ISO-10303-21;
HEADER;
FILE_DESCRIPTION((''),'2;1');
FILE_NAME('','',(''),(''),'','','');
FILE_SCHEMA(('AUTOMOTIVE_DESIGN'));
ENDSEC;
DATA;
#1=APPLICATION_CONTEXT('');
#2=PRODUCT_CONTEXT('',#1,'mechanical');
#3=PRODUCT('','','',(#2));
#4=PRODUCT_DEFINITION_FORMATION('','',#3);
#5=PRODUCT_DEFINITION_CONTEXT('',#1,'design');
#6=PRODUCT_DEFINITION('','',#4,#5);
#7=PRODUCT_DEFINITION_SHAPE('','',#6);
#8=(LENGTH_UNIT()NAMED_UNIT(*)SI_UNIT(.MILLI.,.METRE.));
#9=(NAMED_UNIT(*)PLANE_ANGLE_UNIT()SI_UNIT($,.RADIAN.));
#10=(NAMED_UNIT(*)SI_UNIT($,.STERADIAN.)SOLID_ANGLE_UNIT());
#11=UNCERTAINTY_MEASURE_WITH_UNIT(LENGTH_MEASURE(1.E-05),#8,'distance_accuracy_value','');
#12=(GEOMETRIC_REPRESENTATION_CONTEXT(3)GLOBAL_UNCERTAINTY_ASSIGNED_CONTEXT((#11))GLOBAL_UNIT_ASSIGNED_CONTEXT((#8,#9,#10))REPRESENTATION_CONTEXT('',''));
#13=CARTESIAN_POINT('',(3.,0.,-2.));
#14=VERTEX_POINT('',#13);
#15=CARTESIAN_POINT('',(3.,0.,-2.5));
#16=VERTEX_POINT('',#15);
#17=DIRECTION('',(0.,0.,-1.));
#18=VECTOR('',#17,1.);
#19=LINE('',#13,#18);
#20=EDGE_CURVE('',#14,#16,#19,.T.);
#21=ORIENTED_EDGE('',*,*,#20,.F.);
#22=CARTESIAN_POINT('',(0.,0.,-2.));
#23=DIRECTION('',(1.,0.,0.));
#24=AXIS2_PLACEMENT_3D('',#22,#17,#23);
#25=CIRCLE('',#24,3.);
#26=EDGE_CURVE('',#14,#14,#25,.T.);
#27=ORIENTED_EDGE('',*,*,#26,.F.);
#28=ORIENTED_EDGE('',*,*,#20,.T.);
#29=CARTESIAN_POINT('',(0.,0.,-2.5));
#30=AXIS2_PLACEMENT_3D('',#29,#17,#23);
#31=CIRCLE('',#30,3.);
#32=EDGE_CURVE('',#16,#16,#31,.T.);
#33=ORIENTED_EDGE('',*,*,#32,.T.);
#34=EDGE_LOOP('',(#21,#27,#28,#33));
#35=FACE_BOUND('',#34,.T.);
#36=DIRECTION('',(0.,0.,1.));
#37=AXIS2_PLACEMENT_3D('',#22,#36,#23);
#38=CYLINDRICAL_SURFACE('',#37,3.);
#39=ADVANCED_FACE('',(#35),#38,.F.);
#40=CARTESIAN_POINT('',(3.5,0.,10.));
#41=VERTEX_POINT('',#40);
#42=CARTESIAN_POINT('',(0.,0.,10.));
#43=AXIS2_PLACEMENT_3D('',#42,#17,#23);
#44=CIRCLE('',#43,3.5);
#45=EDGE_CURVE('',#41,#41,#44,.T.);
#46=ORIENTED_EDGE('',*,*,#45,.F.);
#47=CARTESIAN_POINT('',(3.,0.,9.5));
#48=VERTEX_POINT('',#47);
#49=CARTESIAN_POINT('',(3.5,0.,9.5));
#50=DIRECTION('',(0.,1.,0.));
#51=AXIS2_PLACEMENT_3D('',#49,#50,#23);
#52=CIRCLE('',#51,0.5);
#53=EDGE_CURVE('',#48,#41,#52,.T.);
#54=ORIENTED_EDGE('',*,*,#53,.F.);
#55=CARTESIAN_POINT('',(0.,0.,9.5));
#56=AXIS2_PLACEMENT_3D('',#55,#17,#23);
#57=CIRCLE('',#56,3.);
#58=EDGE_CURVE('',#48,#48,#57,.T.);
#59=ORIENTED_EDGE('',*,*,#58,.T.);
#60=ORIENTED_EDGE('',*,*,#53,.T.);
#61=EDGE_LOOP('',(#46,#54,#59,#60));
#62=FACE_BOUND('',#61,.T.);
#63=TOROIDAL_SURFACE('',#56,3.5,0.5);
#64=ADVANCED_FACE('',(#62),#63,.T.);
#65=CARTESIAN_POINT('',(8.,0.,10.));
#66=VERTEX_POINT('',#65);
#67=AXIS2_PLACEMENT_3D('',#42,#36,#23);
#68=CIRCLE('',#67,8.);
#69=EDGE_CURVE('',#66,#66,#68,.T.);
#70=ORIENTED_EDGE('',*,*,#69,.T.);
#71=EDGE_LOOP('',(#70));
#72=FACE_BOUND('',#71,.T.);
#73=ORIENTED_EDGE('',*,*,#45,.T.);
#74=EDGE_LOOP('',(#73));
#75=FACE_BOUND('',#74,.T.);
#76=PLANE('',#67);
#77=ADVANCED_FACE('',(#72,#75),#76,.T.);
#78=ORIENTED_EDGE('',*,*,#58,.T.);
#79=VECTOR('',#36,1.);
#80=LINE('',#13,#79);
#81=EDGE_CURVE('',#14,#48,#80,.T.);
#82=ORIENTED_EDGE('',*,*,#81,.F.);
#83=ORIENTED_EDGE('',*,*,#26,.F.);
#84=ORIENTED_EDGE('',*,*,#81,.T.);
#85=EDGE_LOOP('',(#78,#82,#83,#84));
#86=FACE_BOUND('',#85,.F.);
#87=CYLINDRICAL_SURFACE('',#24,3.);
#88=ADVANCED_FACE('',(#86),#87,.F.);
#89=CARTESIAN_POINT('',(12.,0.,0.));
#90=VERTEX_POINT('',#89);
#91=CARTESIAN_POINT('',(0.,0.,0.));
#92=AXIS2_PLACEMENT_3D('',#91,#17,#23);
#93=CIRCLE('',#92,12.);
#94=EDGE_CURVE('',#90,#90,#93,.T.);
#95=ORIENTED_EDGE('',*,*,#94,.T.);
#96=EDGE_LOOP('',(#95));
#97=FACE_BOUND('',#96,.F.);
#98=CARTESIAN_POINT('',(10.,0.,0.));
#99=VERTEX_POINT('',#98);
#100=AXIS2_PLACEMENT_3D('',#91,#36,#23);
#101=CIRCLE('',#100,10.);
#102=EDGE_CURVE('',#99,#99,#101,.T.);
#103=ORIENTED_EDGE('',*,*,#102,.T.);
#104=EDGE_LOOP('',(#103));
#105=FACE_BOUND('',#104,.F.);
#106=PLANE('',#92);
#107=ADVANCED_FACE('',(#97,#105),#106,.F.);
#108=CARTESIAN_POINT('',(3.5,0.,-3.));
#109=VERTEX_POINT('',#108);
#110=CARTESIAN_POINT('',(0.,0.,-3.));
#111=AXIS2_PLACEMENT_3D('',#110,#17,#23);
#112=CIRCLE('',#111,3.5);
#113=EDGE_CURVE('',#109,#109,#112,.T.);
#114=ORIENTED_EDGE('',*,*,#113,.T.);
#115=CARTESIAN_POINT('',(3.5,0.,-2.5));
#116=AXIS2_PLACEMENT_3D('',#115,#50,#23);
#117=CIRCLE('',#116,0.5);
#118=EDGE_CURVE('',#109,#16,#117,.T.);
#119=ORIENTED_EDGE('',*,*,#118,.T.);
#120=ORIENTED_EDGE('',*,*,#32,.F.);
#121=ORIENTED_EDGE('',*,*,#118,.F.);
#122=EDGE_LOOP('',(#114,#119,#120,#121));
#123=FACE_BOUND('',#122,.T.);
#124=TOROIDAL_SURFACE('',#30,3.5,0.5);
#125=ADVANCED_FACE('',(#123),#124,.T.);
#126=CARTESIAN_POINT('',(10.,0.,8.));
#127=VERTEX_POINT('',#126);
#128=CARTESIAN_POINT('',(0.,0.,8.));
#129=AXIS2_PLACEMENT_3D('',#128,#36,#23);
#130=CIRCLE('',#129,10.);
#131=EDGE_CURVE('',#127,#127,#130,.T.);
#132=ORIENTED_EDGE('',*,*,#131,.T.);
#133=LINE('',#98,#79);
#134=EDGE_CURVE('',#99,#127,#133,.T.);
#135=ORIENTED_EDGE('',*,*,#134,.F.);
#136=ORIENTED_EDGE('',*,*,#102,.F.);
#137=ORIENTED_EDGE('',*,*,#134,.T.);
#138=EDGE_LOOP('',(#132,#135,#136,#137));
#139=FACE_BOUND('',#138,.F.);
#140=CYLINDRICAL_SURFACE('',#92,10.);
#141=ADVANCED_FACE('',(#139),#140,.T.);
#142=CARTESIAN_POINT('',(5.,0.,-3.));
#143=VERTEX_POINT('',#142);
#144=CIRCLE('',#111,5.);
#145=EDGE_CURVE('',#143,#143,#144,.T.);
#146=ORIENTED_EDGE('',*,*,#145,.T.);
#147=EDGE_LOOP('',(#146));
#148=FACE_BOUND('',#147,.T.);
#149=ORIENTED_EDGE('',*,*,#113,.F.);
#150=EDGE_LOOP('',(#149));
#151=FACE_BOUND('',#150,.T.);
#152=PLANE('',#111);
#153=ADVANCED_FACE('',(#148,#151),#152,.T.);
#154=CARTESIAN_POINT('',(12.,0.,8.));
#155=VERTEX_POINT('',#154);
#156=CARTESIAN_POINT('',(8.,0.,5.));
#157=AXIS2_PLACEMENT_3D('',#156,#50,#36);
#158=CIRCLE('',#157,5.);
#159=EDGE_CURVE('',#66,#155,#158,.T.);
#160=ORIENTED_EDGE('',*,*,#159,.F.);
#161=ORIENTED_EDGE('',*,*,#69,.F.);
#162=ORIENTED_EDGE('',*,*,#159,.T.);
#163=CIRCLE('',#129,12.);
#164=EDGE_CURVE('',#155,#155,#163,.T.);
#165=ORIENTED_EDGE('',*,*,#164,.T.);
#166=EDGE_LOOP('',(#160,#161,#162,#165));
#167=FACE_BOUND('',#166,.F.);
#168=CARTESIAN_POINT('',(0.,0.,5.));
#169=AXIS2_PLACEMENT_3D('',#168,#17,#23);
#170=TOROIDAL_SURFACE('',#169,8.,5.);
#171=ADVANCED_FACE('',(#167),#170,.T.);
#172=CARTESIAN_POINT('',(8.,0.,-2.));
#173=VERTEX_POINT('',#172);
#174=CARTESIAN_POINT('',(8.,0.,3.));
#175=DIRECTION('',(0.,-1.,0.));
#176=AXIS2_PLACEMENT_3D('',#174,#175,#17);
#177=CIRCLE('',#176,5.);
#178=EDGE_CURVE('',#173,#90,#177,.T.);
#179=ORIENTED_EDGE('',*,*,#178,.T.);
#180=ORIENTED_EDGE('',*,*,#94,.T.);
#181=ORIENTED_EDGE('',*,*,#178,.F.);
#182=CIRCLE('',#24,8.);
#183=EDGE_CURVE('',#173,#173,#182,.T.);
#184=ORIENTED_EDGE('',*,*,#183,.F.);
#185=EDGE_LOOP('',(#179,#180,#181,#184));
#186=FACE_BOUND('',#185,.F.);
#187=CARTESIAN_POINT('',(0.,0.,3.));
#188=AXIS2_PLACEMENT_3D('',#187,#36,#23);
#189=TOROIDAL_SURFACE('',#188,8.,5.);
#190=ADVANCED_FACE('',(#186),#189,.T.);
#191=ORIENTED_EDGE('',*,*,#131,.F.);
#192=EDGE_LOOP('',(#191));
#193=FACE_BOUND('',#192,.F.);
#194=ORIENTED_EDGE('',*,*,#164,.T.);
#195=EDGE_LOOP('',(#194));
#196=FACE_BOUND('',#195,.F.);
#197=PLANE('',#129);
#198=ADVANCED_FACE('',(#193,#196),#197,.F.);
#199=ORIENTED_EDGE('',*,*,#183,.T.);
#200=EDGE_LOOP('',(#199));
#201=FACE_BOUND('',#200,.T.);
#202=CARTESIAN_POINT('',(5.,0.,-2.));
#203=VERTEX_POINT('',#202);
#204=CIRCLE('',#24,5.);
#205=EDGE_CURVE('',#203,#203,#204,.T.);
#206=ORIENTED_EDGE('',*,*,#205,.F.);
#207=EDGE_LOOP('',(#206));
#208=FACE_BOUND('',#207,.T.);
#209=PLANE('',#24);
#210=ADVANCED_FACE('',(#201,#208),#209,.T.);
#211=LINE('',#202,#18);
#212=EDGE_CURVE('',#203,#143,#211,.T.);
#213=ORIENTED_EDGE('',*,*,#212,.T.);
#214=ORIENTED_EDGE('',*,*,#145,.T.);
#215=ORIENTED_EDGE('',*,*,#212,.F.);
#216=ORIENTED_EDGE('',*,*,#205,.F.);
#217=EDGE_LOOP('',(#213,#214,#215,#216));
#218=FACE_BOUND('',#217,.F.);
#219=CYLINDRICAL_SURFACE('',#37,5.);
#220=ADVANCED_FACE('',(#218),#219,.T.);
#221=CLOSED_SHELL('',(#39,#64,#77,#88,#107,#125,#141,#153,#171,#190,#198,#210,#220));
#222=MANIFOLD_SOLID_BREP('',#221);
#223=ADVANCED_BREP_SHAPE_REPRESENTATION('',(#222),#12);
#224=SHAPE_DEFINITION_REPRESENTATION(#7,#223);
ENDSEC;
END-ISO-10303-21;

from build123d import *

# Parameters (mm, degrees)
F0_R      = 10
F1_DEPTH  = 8
F2_R      = 12
F2_R_2    = 10
F3_DEPTH  = 2
F4_R      = 12
F4_R_2    = 10
F5_DEPTH  = 2
F6_R      = 3
F7_DEPTH  = 25
F9_R      = 5
F9_R_2    = 3
F10_DEPTH = 1
F11_R     = 0.5
F13_R     = 0.5


# Not quite as in the source:
# - a fillet or chamfer that OpenCascade refuses, or shapes differently, is made with other operations: its cross-section is extruded or revolved along the edge and cut away or added


with BuildPart() as f1:
    # F0 (on Top) → F1 (new body)
    with BuildSketch(Plane.XY):
        Circle(F0_R)
    extrude(amount=F1_DEPTH)

    # F2 (on face) → F3 (join)
    with BuildSketch(Plane.XY.offset(8)):
        Circle(F2_R)
        Circle(F2_R_2, mode=Mode.SUBTRACT)
        Circle(F2_R_2)
    extrude(amount=F3_DEPTH)

    # F4 (on face) → F5 (join)
    with BuildSketch(Plane(origin=(0, 0, 0), x_dir=(1, 0, 0), z_dir=(0, 0, -1))):
        Circle(F4_R)
        Circle(F4_R_2, mode=Mode.SUBTRACT)
        Circle(F4_R_2)
    extrude(amount=F5_DEPTH)

    # F6 (on face) → F7 (cut)
    with BuildSketch(Plane(origin=(0, 0, -2), x_dir=(1, 0, 0), z_dir=(0, 0, -1))):
        Circle(F6_R)
    extrude(amount=-F7_DEPTH, mode=Mode.SUBTRACT)

    # F8: union 

    # F9 (on face) → F10 (join)
    with BuildSketch(Plane(origin=(0, 0, -2), x_dir=(1, 0, 0), z_dir=(0, 0, -1))):
        Circle(F9_R)
        Circle(F9_R_2, mode=Mode.SUBTRACT)
    extrude(amount=F10_DEPTH)

    # F11
    f11_edges = [f1.edges().sort_by_distance(p)[0] for p in [
        (-3, 0, -3),
    ]]
    fillet(f11_edges, radius=F11_R)

    # F12: fillet of radius 5 on 2 edges, made by hand

    # F12_s1 → F12_t2 (revolve, cut)
    with BuildSketch(Plane.XZ):
        with BuildLine():
            ThreePointArc((8, -2), (10.2360679775, -1.472135955), (12, 0))
            Line((12, 0), (12, -2))
            Line((12, -2), (8, -2))
        make_face()
    revolve(axis=Axis((0, 0, -2), (0, 0, -1)), mode=Mode.SUBTRACT)

    # F12_s3 → F12_t4 (revolve, cut)
    with BuildSketch(Plane.XZ):
        with BuildLine():
            ThreePointArc((8, 10), (10.2360679775, 9.472135955), (12, 8))
            Line((12, 8), (12, 10))
            Line((12, 10), (8, 10))
        make_face()
    revolve(axis=Axis((0, 0, 10), (0, 0, 1)), mode=Mode.SUBTRACT)

    # F13
    f13_edges = [f1.edges().sort_by_distance(p)[0] for p in [
        (3, 0, 4),
        (-3, 0, 10),
        (-3, 0, -2),
        (3, 0, -2.25),
        (-3, 0, -2.5),
    ]]
    fillet(f13_edges, radius=F13_R)


solid = f1.part
